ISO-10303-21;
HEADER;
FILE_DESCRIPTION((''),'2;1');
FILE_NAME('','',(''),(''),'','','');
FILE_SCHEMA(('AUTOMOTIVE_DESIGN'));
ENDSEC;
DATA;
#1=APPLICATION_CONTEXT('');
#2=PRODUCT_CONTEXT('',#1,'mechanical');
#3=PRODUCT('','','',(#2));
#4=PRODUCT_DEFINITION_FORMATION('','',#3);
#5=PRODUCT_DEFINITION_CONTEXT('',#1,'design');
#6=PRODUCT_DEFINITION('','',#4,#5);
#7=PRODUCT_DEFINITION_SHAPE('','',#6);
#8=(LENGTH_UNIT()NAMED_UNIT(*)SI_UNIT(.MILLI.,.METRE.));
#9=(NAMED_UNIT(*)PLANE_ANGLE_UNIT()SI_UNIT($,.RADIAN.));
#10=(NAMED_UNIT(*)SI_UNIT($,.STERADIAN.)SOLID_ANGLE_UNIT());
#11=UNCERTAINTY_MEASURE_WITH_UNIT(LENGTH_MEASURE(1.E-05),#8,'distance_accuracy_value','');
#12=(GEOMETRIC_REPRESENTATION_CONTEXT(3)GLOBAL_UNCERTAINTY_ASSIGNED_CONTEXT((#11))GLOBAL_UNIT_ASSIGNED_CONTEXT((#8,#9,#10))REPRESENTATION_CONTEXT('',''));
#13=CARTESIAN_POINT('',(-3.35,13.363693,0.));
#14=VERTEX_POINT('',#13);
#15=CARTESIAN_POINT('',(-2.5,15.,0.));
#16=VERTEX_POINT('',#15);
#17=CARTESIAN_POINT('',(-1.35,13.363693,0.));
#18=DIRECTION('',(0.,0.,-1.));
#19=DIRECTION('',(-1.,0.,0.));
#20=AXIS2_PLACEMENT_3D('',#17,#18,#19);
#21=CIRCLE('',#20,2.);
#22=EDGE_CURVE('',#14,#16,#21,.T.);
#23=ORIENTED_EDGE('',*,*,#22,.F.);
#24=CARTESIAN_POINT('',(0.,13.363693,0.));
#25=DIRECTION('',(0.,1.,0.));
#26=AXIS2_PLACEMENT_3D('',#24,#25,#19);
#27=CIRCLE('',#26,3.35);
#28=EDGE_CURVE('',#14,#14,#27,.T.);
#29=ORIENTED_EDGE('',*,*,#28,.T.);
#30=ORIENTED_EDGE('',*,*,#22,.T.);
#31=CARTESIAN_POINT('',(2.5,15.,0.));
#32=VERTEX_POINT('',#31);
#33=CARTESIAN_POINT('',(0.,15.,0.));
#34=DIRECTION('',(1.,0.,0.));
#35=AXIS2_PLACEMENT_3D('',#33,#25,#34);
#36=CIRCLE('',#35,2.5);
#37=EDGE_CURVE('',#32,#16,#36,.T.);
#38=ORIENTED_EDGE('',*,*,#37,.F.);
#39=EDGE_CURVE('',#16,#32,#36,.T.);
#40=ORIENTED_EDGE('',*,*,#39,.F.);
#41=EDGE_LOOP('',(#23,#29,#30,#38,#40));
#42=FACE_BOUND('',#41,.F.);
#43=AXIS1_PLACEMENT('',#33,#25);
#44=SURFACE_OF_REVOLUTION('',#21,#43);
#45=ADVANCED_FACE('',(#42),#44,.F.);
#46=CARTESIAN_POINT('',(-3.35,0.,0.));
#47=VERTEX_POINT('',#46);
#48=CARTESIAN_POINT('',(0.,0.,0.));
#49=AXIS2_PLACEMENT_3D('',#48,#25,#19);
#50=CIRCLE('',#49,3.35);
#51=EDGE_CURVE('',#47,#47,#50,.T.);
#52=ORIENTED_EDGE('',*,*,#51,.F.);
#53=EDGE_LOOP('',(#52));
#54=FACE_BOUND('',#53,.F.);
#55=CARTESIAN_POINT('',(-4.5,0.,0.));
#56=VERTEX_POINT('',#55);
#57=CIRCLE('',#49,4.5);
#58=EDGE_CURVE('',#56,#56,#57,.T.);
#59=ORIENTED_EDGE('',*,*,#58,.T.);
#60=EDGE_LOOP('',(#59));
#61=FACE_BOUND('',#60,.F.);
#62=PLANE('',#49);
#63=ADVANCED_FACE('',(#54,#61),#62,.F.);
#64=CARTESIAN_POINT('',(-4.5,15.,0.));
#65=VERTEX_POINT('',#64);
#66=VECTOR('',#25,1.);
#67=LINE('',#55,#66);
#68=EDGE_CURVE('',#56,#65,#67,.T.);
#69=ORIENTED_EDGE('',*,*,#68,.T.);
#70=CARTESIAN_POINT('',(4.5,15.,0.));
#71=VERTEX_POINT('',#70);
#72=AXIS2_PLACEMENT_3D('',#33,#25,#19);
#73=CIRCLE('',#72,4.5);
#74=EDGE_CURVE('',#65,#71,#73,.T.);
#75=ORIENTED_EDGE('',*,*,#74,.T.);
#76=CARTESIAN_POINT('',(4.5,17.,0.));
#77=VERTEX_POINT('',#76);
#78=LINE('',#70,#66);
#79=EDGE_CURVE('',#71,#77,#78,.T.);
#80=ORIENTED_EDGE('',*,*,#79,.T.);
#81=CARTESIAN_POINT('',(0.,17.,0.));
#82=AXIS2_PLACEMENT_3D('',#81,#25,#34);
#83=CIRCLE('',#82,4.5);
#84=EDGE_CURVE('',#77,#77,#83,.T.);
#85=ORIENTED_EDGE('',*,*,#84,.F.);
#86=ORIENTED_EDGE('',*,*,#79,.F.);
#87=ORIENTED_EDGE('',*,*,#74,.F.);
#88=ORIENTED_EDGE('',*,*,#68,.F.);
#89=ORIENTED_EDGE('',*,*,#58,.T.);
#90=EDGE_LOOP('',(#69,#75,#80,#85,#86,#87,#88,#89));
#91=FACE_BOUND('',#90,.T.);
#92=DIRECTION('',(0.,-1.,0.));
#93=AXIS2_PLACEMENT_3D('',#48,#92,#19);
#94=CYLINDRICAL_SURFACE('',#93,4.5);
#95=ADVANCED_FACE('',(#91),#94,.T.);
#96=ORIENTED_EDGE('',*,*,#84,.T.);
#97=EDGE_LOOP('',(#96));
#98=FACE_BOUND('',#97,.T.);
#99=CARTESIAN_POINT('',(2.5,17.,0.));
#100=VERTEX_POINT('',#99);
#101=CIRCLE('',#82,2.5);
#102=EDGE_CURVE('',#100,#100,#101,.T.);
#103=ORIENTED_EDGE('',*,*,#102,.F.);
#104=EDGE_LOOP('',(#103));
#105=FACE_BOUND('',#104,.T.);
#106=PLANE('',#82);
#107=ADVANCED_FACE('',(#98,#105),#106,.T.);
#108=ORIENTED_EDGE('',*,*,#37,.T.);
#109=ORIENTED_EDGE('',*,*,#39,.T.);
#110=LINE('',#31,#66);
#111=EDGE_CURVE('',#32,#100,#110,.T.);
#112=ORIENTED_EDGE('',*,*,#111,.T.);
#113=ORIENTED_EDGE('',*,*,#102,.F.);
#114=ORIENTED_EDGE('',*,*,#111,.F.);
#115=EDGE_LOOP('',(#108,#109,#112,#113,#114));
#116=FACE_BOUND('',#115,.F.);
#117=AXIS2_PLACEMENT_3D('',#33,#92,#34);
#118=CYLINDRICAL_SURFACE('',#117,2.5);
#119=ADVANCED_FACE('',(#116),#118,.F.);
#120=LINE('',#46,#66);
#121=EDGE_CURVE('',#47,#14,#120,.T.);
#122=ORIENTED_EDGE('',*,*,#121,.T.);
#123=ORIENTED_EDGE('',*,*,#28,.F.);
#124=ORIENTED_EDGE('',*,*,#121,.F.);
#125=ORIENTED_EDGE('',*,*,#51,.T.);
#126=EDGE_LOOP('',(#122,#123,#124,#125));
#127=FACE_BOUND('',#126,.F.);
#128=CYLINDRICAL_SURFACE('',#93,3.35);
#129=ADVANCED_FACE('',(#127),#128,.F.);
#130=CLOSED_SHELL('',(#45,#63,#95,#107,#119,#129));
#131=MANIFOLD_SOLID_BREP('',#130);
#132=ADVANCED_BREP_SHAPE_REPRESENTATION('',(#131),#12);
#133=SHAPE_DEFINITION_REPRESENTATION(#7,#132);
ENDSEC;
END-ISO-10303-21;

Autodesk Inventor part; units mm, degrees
ref_plane "YZ Plane" through (0, 0, 0) normal (1, 0, 0) x (0, 1, 0)
ref_plane "XZ Plane" through (0, 0, 0) normal (0, 1, 0) x (-1, 0, 0)
ref_plane "XY Plane" through (0, 0, 0) normal (0, 0, 1) x (1, 0, 0)
sketch "Sketch1" plane through (0, 0, 0) normal (0, 1, 0) x (-1, 0, 0)
  circle A0 centre (0, 0) radius 3.35
  circle A1 centre (0, 0) radius 4.5
  dimension "d0" = 6.7
  dimension "d1" = 9
extrude "Extrusion1" add sketch "Sketch1" along normal blind 15
sketch "Sketch2" plane through (0, 15, 0) normal (0, 1, 0) x (1, 0, 0)
  circle A0 centre (0, 0) radius 2.5
  circle A1 centre (0, 0) radius 3.35 projected
  circle A2 centre (0, 0) radius 4.5 projected
  dimension "d4" = 5
extrude "Extrusion2" add sketch "Sketch2" along normal blind 2 contours A1 | A2
fillet "Fillet1" radius 2 1 edges at (3.35, 15, 0)
equation "\"BendRadius\" = Thickness"
equation "\"BendReliefWidth\" = Thickness"
equation "\"BendReliefDepth\" = 0.5 * Thickness"
equation "\"CornerReliefSize\" = 4 * Thickness"
equation "\"MinimumRemnant\" = 2 * Thickness"
equation "\"TransitionRadius\" = BendRadius"
equation "\"JacobiRadiusSize\" = BendRadius"
equation "\"GapSize\" = Thickness"
equation "\"Thickness\" = 0.5"
properties part number "laser_tube_extender_single"
